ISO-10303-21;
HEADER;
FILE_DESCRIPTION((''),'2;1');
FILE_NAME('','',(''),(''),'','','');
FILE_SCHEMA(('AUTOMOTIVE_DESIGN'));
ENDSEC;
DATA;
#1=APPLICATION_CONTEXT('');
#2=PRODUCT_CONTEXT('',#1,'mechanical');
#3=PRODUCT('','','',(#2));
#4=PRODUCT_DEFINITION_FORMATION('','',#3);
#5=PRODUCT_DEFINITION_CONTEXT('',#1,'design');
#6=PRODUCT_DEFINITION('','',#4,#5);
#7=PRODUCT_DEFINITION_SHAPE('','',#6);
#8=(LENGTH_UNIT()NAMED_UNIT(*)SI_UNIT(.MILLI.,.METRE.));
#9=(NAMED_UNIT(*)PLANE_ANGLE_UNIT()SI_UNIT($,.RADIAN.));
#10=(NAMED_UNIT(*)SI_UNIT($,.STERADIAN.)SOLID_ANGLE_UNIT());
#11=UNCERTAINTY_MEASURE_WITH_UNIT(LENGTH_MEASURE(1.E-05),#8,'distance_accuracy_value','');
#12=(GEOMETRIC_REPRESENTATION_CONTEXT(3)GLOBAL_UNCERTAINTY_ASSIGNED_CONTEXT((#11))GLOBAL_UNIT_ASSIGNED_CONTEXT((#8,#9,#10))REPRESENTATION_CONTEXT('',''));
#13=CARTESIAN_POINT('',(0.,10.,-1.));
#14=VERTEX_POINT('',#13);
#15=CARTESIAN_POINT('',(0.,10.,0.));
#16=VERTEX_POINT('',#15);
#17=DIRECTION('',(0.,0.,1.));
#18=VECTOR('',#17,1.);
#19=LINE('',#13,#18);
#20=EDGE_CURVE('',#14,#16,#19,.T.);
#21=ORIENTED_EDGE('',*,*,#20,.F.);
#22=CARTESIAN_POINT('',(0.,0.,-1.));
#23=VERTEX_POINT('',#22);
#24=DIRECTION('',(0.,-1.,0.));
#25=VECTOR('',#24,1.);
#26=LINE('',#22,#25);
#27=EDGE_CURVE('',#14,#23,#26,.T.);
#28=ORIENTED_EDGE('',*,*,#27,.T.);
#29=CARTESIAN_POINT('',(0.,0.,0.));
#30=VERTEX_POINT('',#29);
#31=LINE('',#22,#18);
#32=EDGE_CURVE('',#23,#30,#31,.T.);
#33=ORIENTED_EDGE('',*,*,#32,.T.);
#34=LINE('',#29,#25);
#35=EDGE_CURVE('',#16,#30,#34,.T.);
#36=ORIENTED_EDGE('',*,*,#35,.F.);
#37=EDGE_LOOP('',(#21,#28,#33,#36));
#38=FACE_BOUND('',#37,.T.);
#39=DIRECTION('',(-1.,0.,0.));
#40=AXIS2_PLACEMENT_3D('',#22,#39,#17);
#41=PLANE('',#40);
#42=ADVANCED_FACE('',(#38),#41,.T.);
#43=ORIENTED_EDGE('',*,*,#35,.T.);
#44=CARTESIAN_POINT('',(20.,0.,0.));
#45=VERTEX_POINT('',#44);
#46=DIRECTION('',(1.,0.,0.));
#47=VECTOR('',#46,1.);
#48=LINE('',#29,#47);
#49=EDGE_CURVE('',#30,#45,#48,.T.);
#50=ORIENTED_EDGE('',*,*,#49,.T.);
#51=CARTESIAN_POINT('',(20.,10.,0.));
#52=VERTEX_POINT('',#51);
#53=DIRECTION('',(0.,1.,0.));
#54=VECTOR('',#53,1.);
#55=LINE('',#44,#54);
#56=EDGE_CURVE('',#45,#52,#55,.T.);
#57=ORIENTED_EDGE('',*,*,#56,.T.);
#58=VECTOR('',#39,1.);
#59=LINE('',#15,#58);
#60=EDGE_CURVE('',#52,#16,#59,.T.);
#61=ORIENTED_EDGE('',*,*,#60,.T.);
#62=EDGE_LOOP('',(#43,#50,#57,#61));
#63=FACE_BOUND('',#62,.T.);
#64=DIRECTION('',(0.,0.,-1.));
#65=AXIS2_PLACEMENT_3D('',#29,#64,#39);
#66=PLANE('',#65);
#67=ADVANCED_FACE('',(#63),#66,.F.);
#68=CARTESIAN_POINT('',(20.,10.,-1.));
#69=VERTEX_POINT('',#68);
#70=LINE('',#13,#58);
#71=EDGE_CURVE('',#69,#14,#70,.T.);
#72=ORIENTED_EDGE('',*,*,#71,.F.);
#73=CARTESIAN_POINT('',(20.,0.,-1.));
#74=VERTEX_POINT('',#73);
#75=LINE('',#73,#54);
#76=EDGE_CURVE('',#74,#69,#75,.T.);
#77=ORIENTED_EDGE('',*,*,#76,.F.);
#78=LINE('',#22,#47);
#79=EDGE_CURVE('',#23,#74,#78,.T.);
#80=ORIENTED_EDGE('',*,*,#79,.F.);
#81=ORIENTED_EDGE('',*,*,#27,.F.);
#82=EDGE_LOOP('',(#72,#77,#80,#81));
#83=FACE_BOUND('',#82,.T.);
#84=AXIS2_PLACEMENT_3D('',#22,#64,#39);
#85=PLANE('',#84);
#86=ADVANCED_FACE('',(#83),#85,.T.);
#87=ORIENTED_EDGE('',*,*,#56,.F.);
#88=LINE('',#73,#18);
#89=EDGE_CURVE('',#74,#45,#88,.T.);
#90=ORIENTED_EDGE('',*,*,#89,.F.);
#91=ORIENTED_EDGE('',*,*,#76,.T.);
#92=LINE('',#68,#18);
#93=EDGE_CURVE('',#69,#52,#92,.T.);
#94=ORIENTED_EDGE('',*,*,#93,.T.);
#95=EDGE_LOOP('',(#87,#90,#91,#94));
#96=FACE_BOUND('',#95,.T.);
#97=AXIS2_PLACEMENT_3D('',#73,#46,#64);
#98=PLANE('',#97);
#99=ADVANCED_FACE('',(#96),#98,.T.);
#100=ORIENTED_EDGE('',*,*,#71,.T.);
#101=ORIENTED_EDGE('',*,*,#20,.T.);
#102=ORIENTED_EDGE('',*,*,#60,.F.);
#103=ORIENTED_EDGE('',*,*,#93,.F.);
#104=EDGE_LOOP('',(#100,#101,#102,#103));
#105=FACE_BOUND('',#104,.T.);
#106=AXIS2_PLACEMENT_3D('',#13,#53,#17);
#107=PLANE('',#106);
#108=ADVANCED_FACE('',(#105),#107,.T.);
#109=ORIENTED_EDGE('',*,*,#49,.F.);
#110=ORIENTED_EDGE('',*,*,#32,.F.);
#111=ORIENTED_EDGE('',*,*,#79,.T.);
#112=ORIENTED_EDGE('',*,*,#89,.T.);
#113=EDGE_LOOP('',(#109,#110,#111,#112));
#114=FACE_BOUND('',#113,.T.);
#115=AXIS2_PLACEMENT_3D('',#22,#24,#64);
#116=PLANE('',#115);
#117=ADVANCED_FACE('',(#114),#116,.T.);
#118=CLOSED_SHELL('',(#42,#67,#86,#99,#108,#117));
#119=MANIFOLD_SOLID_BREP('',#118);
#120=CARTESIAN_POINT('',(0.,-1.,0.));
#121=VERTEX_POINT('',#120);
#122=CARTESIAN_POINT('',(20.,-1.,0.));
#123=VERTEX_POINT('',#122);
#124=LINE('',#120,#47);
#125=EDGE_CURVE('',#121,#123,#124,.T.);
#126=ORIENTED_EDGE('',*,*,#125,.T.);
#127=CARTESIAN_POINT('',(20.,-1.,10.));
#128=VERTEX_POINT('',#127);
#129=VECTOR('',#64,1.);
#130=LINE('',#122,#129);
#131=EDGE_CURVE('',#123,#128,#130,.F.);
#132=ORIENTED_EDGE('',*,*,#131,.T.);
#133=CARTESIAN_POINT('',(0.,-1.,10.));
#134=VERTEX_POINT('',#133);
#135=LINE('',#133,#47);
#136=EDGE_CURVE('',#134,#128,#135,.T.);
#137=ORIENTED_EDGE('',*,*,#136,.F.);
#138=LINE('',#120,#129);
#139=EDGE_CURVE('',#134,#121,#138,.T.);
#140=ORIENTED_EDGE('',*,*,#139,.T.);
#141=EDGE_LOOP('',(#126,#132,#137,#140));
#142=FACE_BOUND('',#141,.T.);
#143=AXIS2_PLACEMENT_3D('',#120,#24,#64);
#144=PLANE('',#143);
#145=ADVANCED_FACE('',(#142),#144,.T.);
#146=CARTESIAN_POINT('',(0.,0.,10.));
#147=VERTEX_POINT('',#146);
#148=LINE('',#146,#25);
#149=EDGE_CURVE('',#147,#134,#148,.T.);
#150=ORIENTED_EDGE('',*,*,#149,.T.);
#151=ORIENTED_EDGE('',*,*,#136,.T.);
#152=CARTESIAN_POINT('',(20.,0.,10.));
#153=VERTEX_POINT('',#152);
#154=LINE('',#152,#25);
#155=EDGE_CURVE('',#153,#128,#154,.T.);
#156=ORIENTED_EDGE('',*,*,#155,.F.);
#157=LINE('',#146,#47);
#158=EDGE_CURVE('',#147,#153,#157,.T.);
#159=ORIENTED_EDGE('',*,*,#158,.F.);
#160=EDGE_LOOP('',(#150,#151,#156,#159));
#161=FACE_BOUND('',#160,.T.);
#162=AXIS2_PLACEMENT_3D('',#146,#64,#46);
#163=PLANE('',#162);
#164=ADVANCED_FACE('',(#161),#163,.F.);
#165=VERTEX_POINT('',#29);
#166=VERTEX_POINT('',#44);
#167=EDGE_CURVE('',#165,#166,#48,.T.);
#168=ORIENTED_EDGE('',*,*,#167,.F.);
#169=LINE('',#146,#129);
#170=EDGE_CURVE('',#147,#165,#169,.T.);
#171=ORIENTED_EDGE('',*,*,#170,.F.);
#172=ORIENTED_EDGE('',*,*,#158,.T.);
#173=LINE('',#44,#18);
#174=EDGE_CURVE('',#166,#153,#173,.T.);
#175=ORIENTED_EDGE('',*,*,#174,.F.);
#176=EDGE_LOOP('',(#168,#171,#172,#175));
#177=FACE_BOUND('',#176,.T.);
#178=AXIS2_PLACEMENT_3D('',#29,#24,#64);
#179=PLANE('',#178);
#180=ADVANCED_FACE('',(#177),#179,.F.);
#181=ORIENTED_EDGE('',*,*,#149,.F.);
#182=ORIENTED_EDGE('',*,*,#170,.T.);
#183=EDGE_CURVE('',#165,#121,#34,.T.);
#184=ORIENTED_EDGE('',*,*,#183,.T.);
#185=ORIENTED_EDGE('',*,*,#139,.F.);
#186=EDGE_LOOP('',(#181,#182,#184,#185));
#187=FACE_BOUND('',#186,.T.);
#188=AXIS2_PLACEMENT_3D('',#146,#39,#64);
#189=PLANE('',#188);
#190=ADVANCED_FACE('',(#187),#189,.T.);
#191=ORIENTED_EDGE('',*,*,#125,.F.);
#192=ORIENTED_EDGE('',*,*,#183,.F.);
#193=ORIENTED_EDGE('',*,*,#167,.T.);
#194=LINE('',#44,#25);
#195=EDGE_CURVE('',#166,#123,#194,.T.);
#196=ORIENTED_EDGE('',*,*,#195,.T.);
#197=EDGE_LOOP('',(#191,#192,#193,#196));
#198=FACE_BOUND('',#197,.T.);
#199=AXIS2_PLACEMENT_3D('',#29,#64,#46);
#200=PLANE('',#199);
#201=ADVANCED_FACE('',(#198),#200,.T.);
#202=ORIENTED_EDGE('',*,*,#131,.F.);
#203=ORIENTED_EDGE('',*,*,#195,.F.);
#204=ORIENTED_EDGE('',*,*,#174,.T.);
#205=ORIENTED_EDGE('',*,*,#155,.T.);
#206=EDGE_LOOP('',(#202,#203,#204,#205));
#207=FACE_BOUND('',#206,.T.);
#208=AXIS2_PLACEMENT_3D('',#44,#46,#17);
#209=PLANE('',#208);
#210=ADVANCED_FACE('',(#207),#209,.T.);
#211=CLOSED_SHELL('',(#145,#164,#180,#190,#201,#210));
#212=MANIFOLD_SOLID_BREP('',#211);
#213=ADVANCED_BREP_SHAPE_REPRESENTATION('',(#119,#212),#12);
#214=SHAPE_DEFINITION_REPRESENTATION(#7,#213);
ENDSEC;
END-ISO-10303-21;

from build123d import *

# Parameters (mm, degrees)
SKETCH_1_W           = 20
SKETCH_1_H           = 10
BASEPLATE_DEPTH      = 1
LOFTEDBEND_OUTLINE_W = 1
LOFTEDBEND_OUTLINE_H = 10
LOFTEDBEND_DEPTH     = 20


# Read off the part's stored shape, not the designer's step: LoftedBend
# Sheet-metal steps are written as plain solids
with BuildPart() as part:
    # Sketch 1 → BasePlate (new body)
    with BuildSketch(Plane.XY):
        with Locations((10, 5)):
            Rectangle(SKETCH_1_W, SKETCH_1_H)
    extrude(amount=-BASEPLATE_DEPTH)


with BuildPart() as body_2:
    # LoftedBend outline → LoftedBend (new body)
    with BuildSketch(Plane.YZ):
        with Locations((-0.5, 5)):
            Rectangle(LOFTEDBEND_OUTLINE_W, LOFTEDBEND_OUTLINE_H)
    extrude(amount=LOFTEDBEND_DEPTH)


solid = Compound([part.part, body_2.part])
